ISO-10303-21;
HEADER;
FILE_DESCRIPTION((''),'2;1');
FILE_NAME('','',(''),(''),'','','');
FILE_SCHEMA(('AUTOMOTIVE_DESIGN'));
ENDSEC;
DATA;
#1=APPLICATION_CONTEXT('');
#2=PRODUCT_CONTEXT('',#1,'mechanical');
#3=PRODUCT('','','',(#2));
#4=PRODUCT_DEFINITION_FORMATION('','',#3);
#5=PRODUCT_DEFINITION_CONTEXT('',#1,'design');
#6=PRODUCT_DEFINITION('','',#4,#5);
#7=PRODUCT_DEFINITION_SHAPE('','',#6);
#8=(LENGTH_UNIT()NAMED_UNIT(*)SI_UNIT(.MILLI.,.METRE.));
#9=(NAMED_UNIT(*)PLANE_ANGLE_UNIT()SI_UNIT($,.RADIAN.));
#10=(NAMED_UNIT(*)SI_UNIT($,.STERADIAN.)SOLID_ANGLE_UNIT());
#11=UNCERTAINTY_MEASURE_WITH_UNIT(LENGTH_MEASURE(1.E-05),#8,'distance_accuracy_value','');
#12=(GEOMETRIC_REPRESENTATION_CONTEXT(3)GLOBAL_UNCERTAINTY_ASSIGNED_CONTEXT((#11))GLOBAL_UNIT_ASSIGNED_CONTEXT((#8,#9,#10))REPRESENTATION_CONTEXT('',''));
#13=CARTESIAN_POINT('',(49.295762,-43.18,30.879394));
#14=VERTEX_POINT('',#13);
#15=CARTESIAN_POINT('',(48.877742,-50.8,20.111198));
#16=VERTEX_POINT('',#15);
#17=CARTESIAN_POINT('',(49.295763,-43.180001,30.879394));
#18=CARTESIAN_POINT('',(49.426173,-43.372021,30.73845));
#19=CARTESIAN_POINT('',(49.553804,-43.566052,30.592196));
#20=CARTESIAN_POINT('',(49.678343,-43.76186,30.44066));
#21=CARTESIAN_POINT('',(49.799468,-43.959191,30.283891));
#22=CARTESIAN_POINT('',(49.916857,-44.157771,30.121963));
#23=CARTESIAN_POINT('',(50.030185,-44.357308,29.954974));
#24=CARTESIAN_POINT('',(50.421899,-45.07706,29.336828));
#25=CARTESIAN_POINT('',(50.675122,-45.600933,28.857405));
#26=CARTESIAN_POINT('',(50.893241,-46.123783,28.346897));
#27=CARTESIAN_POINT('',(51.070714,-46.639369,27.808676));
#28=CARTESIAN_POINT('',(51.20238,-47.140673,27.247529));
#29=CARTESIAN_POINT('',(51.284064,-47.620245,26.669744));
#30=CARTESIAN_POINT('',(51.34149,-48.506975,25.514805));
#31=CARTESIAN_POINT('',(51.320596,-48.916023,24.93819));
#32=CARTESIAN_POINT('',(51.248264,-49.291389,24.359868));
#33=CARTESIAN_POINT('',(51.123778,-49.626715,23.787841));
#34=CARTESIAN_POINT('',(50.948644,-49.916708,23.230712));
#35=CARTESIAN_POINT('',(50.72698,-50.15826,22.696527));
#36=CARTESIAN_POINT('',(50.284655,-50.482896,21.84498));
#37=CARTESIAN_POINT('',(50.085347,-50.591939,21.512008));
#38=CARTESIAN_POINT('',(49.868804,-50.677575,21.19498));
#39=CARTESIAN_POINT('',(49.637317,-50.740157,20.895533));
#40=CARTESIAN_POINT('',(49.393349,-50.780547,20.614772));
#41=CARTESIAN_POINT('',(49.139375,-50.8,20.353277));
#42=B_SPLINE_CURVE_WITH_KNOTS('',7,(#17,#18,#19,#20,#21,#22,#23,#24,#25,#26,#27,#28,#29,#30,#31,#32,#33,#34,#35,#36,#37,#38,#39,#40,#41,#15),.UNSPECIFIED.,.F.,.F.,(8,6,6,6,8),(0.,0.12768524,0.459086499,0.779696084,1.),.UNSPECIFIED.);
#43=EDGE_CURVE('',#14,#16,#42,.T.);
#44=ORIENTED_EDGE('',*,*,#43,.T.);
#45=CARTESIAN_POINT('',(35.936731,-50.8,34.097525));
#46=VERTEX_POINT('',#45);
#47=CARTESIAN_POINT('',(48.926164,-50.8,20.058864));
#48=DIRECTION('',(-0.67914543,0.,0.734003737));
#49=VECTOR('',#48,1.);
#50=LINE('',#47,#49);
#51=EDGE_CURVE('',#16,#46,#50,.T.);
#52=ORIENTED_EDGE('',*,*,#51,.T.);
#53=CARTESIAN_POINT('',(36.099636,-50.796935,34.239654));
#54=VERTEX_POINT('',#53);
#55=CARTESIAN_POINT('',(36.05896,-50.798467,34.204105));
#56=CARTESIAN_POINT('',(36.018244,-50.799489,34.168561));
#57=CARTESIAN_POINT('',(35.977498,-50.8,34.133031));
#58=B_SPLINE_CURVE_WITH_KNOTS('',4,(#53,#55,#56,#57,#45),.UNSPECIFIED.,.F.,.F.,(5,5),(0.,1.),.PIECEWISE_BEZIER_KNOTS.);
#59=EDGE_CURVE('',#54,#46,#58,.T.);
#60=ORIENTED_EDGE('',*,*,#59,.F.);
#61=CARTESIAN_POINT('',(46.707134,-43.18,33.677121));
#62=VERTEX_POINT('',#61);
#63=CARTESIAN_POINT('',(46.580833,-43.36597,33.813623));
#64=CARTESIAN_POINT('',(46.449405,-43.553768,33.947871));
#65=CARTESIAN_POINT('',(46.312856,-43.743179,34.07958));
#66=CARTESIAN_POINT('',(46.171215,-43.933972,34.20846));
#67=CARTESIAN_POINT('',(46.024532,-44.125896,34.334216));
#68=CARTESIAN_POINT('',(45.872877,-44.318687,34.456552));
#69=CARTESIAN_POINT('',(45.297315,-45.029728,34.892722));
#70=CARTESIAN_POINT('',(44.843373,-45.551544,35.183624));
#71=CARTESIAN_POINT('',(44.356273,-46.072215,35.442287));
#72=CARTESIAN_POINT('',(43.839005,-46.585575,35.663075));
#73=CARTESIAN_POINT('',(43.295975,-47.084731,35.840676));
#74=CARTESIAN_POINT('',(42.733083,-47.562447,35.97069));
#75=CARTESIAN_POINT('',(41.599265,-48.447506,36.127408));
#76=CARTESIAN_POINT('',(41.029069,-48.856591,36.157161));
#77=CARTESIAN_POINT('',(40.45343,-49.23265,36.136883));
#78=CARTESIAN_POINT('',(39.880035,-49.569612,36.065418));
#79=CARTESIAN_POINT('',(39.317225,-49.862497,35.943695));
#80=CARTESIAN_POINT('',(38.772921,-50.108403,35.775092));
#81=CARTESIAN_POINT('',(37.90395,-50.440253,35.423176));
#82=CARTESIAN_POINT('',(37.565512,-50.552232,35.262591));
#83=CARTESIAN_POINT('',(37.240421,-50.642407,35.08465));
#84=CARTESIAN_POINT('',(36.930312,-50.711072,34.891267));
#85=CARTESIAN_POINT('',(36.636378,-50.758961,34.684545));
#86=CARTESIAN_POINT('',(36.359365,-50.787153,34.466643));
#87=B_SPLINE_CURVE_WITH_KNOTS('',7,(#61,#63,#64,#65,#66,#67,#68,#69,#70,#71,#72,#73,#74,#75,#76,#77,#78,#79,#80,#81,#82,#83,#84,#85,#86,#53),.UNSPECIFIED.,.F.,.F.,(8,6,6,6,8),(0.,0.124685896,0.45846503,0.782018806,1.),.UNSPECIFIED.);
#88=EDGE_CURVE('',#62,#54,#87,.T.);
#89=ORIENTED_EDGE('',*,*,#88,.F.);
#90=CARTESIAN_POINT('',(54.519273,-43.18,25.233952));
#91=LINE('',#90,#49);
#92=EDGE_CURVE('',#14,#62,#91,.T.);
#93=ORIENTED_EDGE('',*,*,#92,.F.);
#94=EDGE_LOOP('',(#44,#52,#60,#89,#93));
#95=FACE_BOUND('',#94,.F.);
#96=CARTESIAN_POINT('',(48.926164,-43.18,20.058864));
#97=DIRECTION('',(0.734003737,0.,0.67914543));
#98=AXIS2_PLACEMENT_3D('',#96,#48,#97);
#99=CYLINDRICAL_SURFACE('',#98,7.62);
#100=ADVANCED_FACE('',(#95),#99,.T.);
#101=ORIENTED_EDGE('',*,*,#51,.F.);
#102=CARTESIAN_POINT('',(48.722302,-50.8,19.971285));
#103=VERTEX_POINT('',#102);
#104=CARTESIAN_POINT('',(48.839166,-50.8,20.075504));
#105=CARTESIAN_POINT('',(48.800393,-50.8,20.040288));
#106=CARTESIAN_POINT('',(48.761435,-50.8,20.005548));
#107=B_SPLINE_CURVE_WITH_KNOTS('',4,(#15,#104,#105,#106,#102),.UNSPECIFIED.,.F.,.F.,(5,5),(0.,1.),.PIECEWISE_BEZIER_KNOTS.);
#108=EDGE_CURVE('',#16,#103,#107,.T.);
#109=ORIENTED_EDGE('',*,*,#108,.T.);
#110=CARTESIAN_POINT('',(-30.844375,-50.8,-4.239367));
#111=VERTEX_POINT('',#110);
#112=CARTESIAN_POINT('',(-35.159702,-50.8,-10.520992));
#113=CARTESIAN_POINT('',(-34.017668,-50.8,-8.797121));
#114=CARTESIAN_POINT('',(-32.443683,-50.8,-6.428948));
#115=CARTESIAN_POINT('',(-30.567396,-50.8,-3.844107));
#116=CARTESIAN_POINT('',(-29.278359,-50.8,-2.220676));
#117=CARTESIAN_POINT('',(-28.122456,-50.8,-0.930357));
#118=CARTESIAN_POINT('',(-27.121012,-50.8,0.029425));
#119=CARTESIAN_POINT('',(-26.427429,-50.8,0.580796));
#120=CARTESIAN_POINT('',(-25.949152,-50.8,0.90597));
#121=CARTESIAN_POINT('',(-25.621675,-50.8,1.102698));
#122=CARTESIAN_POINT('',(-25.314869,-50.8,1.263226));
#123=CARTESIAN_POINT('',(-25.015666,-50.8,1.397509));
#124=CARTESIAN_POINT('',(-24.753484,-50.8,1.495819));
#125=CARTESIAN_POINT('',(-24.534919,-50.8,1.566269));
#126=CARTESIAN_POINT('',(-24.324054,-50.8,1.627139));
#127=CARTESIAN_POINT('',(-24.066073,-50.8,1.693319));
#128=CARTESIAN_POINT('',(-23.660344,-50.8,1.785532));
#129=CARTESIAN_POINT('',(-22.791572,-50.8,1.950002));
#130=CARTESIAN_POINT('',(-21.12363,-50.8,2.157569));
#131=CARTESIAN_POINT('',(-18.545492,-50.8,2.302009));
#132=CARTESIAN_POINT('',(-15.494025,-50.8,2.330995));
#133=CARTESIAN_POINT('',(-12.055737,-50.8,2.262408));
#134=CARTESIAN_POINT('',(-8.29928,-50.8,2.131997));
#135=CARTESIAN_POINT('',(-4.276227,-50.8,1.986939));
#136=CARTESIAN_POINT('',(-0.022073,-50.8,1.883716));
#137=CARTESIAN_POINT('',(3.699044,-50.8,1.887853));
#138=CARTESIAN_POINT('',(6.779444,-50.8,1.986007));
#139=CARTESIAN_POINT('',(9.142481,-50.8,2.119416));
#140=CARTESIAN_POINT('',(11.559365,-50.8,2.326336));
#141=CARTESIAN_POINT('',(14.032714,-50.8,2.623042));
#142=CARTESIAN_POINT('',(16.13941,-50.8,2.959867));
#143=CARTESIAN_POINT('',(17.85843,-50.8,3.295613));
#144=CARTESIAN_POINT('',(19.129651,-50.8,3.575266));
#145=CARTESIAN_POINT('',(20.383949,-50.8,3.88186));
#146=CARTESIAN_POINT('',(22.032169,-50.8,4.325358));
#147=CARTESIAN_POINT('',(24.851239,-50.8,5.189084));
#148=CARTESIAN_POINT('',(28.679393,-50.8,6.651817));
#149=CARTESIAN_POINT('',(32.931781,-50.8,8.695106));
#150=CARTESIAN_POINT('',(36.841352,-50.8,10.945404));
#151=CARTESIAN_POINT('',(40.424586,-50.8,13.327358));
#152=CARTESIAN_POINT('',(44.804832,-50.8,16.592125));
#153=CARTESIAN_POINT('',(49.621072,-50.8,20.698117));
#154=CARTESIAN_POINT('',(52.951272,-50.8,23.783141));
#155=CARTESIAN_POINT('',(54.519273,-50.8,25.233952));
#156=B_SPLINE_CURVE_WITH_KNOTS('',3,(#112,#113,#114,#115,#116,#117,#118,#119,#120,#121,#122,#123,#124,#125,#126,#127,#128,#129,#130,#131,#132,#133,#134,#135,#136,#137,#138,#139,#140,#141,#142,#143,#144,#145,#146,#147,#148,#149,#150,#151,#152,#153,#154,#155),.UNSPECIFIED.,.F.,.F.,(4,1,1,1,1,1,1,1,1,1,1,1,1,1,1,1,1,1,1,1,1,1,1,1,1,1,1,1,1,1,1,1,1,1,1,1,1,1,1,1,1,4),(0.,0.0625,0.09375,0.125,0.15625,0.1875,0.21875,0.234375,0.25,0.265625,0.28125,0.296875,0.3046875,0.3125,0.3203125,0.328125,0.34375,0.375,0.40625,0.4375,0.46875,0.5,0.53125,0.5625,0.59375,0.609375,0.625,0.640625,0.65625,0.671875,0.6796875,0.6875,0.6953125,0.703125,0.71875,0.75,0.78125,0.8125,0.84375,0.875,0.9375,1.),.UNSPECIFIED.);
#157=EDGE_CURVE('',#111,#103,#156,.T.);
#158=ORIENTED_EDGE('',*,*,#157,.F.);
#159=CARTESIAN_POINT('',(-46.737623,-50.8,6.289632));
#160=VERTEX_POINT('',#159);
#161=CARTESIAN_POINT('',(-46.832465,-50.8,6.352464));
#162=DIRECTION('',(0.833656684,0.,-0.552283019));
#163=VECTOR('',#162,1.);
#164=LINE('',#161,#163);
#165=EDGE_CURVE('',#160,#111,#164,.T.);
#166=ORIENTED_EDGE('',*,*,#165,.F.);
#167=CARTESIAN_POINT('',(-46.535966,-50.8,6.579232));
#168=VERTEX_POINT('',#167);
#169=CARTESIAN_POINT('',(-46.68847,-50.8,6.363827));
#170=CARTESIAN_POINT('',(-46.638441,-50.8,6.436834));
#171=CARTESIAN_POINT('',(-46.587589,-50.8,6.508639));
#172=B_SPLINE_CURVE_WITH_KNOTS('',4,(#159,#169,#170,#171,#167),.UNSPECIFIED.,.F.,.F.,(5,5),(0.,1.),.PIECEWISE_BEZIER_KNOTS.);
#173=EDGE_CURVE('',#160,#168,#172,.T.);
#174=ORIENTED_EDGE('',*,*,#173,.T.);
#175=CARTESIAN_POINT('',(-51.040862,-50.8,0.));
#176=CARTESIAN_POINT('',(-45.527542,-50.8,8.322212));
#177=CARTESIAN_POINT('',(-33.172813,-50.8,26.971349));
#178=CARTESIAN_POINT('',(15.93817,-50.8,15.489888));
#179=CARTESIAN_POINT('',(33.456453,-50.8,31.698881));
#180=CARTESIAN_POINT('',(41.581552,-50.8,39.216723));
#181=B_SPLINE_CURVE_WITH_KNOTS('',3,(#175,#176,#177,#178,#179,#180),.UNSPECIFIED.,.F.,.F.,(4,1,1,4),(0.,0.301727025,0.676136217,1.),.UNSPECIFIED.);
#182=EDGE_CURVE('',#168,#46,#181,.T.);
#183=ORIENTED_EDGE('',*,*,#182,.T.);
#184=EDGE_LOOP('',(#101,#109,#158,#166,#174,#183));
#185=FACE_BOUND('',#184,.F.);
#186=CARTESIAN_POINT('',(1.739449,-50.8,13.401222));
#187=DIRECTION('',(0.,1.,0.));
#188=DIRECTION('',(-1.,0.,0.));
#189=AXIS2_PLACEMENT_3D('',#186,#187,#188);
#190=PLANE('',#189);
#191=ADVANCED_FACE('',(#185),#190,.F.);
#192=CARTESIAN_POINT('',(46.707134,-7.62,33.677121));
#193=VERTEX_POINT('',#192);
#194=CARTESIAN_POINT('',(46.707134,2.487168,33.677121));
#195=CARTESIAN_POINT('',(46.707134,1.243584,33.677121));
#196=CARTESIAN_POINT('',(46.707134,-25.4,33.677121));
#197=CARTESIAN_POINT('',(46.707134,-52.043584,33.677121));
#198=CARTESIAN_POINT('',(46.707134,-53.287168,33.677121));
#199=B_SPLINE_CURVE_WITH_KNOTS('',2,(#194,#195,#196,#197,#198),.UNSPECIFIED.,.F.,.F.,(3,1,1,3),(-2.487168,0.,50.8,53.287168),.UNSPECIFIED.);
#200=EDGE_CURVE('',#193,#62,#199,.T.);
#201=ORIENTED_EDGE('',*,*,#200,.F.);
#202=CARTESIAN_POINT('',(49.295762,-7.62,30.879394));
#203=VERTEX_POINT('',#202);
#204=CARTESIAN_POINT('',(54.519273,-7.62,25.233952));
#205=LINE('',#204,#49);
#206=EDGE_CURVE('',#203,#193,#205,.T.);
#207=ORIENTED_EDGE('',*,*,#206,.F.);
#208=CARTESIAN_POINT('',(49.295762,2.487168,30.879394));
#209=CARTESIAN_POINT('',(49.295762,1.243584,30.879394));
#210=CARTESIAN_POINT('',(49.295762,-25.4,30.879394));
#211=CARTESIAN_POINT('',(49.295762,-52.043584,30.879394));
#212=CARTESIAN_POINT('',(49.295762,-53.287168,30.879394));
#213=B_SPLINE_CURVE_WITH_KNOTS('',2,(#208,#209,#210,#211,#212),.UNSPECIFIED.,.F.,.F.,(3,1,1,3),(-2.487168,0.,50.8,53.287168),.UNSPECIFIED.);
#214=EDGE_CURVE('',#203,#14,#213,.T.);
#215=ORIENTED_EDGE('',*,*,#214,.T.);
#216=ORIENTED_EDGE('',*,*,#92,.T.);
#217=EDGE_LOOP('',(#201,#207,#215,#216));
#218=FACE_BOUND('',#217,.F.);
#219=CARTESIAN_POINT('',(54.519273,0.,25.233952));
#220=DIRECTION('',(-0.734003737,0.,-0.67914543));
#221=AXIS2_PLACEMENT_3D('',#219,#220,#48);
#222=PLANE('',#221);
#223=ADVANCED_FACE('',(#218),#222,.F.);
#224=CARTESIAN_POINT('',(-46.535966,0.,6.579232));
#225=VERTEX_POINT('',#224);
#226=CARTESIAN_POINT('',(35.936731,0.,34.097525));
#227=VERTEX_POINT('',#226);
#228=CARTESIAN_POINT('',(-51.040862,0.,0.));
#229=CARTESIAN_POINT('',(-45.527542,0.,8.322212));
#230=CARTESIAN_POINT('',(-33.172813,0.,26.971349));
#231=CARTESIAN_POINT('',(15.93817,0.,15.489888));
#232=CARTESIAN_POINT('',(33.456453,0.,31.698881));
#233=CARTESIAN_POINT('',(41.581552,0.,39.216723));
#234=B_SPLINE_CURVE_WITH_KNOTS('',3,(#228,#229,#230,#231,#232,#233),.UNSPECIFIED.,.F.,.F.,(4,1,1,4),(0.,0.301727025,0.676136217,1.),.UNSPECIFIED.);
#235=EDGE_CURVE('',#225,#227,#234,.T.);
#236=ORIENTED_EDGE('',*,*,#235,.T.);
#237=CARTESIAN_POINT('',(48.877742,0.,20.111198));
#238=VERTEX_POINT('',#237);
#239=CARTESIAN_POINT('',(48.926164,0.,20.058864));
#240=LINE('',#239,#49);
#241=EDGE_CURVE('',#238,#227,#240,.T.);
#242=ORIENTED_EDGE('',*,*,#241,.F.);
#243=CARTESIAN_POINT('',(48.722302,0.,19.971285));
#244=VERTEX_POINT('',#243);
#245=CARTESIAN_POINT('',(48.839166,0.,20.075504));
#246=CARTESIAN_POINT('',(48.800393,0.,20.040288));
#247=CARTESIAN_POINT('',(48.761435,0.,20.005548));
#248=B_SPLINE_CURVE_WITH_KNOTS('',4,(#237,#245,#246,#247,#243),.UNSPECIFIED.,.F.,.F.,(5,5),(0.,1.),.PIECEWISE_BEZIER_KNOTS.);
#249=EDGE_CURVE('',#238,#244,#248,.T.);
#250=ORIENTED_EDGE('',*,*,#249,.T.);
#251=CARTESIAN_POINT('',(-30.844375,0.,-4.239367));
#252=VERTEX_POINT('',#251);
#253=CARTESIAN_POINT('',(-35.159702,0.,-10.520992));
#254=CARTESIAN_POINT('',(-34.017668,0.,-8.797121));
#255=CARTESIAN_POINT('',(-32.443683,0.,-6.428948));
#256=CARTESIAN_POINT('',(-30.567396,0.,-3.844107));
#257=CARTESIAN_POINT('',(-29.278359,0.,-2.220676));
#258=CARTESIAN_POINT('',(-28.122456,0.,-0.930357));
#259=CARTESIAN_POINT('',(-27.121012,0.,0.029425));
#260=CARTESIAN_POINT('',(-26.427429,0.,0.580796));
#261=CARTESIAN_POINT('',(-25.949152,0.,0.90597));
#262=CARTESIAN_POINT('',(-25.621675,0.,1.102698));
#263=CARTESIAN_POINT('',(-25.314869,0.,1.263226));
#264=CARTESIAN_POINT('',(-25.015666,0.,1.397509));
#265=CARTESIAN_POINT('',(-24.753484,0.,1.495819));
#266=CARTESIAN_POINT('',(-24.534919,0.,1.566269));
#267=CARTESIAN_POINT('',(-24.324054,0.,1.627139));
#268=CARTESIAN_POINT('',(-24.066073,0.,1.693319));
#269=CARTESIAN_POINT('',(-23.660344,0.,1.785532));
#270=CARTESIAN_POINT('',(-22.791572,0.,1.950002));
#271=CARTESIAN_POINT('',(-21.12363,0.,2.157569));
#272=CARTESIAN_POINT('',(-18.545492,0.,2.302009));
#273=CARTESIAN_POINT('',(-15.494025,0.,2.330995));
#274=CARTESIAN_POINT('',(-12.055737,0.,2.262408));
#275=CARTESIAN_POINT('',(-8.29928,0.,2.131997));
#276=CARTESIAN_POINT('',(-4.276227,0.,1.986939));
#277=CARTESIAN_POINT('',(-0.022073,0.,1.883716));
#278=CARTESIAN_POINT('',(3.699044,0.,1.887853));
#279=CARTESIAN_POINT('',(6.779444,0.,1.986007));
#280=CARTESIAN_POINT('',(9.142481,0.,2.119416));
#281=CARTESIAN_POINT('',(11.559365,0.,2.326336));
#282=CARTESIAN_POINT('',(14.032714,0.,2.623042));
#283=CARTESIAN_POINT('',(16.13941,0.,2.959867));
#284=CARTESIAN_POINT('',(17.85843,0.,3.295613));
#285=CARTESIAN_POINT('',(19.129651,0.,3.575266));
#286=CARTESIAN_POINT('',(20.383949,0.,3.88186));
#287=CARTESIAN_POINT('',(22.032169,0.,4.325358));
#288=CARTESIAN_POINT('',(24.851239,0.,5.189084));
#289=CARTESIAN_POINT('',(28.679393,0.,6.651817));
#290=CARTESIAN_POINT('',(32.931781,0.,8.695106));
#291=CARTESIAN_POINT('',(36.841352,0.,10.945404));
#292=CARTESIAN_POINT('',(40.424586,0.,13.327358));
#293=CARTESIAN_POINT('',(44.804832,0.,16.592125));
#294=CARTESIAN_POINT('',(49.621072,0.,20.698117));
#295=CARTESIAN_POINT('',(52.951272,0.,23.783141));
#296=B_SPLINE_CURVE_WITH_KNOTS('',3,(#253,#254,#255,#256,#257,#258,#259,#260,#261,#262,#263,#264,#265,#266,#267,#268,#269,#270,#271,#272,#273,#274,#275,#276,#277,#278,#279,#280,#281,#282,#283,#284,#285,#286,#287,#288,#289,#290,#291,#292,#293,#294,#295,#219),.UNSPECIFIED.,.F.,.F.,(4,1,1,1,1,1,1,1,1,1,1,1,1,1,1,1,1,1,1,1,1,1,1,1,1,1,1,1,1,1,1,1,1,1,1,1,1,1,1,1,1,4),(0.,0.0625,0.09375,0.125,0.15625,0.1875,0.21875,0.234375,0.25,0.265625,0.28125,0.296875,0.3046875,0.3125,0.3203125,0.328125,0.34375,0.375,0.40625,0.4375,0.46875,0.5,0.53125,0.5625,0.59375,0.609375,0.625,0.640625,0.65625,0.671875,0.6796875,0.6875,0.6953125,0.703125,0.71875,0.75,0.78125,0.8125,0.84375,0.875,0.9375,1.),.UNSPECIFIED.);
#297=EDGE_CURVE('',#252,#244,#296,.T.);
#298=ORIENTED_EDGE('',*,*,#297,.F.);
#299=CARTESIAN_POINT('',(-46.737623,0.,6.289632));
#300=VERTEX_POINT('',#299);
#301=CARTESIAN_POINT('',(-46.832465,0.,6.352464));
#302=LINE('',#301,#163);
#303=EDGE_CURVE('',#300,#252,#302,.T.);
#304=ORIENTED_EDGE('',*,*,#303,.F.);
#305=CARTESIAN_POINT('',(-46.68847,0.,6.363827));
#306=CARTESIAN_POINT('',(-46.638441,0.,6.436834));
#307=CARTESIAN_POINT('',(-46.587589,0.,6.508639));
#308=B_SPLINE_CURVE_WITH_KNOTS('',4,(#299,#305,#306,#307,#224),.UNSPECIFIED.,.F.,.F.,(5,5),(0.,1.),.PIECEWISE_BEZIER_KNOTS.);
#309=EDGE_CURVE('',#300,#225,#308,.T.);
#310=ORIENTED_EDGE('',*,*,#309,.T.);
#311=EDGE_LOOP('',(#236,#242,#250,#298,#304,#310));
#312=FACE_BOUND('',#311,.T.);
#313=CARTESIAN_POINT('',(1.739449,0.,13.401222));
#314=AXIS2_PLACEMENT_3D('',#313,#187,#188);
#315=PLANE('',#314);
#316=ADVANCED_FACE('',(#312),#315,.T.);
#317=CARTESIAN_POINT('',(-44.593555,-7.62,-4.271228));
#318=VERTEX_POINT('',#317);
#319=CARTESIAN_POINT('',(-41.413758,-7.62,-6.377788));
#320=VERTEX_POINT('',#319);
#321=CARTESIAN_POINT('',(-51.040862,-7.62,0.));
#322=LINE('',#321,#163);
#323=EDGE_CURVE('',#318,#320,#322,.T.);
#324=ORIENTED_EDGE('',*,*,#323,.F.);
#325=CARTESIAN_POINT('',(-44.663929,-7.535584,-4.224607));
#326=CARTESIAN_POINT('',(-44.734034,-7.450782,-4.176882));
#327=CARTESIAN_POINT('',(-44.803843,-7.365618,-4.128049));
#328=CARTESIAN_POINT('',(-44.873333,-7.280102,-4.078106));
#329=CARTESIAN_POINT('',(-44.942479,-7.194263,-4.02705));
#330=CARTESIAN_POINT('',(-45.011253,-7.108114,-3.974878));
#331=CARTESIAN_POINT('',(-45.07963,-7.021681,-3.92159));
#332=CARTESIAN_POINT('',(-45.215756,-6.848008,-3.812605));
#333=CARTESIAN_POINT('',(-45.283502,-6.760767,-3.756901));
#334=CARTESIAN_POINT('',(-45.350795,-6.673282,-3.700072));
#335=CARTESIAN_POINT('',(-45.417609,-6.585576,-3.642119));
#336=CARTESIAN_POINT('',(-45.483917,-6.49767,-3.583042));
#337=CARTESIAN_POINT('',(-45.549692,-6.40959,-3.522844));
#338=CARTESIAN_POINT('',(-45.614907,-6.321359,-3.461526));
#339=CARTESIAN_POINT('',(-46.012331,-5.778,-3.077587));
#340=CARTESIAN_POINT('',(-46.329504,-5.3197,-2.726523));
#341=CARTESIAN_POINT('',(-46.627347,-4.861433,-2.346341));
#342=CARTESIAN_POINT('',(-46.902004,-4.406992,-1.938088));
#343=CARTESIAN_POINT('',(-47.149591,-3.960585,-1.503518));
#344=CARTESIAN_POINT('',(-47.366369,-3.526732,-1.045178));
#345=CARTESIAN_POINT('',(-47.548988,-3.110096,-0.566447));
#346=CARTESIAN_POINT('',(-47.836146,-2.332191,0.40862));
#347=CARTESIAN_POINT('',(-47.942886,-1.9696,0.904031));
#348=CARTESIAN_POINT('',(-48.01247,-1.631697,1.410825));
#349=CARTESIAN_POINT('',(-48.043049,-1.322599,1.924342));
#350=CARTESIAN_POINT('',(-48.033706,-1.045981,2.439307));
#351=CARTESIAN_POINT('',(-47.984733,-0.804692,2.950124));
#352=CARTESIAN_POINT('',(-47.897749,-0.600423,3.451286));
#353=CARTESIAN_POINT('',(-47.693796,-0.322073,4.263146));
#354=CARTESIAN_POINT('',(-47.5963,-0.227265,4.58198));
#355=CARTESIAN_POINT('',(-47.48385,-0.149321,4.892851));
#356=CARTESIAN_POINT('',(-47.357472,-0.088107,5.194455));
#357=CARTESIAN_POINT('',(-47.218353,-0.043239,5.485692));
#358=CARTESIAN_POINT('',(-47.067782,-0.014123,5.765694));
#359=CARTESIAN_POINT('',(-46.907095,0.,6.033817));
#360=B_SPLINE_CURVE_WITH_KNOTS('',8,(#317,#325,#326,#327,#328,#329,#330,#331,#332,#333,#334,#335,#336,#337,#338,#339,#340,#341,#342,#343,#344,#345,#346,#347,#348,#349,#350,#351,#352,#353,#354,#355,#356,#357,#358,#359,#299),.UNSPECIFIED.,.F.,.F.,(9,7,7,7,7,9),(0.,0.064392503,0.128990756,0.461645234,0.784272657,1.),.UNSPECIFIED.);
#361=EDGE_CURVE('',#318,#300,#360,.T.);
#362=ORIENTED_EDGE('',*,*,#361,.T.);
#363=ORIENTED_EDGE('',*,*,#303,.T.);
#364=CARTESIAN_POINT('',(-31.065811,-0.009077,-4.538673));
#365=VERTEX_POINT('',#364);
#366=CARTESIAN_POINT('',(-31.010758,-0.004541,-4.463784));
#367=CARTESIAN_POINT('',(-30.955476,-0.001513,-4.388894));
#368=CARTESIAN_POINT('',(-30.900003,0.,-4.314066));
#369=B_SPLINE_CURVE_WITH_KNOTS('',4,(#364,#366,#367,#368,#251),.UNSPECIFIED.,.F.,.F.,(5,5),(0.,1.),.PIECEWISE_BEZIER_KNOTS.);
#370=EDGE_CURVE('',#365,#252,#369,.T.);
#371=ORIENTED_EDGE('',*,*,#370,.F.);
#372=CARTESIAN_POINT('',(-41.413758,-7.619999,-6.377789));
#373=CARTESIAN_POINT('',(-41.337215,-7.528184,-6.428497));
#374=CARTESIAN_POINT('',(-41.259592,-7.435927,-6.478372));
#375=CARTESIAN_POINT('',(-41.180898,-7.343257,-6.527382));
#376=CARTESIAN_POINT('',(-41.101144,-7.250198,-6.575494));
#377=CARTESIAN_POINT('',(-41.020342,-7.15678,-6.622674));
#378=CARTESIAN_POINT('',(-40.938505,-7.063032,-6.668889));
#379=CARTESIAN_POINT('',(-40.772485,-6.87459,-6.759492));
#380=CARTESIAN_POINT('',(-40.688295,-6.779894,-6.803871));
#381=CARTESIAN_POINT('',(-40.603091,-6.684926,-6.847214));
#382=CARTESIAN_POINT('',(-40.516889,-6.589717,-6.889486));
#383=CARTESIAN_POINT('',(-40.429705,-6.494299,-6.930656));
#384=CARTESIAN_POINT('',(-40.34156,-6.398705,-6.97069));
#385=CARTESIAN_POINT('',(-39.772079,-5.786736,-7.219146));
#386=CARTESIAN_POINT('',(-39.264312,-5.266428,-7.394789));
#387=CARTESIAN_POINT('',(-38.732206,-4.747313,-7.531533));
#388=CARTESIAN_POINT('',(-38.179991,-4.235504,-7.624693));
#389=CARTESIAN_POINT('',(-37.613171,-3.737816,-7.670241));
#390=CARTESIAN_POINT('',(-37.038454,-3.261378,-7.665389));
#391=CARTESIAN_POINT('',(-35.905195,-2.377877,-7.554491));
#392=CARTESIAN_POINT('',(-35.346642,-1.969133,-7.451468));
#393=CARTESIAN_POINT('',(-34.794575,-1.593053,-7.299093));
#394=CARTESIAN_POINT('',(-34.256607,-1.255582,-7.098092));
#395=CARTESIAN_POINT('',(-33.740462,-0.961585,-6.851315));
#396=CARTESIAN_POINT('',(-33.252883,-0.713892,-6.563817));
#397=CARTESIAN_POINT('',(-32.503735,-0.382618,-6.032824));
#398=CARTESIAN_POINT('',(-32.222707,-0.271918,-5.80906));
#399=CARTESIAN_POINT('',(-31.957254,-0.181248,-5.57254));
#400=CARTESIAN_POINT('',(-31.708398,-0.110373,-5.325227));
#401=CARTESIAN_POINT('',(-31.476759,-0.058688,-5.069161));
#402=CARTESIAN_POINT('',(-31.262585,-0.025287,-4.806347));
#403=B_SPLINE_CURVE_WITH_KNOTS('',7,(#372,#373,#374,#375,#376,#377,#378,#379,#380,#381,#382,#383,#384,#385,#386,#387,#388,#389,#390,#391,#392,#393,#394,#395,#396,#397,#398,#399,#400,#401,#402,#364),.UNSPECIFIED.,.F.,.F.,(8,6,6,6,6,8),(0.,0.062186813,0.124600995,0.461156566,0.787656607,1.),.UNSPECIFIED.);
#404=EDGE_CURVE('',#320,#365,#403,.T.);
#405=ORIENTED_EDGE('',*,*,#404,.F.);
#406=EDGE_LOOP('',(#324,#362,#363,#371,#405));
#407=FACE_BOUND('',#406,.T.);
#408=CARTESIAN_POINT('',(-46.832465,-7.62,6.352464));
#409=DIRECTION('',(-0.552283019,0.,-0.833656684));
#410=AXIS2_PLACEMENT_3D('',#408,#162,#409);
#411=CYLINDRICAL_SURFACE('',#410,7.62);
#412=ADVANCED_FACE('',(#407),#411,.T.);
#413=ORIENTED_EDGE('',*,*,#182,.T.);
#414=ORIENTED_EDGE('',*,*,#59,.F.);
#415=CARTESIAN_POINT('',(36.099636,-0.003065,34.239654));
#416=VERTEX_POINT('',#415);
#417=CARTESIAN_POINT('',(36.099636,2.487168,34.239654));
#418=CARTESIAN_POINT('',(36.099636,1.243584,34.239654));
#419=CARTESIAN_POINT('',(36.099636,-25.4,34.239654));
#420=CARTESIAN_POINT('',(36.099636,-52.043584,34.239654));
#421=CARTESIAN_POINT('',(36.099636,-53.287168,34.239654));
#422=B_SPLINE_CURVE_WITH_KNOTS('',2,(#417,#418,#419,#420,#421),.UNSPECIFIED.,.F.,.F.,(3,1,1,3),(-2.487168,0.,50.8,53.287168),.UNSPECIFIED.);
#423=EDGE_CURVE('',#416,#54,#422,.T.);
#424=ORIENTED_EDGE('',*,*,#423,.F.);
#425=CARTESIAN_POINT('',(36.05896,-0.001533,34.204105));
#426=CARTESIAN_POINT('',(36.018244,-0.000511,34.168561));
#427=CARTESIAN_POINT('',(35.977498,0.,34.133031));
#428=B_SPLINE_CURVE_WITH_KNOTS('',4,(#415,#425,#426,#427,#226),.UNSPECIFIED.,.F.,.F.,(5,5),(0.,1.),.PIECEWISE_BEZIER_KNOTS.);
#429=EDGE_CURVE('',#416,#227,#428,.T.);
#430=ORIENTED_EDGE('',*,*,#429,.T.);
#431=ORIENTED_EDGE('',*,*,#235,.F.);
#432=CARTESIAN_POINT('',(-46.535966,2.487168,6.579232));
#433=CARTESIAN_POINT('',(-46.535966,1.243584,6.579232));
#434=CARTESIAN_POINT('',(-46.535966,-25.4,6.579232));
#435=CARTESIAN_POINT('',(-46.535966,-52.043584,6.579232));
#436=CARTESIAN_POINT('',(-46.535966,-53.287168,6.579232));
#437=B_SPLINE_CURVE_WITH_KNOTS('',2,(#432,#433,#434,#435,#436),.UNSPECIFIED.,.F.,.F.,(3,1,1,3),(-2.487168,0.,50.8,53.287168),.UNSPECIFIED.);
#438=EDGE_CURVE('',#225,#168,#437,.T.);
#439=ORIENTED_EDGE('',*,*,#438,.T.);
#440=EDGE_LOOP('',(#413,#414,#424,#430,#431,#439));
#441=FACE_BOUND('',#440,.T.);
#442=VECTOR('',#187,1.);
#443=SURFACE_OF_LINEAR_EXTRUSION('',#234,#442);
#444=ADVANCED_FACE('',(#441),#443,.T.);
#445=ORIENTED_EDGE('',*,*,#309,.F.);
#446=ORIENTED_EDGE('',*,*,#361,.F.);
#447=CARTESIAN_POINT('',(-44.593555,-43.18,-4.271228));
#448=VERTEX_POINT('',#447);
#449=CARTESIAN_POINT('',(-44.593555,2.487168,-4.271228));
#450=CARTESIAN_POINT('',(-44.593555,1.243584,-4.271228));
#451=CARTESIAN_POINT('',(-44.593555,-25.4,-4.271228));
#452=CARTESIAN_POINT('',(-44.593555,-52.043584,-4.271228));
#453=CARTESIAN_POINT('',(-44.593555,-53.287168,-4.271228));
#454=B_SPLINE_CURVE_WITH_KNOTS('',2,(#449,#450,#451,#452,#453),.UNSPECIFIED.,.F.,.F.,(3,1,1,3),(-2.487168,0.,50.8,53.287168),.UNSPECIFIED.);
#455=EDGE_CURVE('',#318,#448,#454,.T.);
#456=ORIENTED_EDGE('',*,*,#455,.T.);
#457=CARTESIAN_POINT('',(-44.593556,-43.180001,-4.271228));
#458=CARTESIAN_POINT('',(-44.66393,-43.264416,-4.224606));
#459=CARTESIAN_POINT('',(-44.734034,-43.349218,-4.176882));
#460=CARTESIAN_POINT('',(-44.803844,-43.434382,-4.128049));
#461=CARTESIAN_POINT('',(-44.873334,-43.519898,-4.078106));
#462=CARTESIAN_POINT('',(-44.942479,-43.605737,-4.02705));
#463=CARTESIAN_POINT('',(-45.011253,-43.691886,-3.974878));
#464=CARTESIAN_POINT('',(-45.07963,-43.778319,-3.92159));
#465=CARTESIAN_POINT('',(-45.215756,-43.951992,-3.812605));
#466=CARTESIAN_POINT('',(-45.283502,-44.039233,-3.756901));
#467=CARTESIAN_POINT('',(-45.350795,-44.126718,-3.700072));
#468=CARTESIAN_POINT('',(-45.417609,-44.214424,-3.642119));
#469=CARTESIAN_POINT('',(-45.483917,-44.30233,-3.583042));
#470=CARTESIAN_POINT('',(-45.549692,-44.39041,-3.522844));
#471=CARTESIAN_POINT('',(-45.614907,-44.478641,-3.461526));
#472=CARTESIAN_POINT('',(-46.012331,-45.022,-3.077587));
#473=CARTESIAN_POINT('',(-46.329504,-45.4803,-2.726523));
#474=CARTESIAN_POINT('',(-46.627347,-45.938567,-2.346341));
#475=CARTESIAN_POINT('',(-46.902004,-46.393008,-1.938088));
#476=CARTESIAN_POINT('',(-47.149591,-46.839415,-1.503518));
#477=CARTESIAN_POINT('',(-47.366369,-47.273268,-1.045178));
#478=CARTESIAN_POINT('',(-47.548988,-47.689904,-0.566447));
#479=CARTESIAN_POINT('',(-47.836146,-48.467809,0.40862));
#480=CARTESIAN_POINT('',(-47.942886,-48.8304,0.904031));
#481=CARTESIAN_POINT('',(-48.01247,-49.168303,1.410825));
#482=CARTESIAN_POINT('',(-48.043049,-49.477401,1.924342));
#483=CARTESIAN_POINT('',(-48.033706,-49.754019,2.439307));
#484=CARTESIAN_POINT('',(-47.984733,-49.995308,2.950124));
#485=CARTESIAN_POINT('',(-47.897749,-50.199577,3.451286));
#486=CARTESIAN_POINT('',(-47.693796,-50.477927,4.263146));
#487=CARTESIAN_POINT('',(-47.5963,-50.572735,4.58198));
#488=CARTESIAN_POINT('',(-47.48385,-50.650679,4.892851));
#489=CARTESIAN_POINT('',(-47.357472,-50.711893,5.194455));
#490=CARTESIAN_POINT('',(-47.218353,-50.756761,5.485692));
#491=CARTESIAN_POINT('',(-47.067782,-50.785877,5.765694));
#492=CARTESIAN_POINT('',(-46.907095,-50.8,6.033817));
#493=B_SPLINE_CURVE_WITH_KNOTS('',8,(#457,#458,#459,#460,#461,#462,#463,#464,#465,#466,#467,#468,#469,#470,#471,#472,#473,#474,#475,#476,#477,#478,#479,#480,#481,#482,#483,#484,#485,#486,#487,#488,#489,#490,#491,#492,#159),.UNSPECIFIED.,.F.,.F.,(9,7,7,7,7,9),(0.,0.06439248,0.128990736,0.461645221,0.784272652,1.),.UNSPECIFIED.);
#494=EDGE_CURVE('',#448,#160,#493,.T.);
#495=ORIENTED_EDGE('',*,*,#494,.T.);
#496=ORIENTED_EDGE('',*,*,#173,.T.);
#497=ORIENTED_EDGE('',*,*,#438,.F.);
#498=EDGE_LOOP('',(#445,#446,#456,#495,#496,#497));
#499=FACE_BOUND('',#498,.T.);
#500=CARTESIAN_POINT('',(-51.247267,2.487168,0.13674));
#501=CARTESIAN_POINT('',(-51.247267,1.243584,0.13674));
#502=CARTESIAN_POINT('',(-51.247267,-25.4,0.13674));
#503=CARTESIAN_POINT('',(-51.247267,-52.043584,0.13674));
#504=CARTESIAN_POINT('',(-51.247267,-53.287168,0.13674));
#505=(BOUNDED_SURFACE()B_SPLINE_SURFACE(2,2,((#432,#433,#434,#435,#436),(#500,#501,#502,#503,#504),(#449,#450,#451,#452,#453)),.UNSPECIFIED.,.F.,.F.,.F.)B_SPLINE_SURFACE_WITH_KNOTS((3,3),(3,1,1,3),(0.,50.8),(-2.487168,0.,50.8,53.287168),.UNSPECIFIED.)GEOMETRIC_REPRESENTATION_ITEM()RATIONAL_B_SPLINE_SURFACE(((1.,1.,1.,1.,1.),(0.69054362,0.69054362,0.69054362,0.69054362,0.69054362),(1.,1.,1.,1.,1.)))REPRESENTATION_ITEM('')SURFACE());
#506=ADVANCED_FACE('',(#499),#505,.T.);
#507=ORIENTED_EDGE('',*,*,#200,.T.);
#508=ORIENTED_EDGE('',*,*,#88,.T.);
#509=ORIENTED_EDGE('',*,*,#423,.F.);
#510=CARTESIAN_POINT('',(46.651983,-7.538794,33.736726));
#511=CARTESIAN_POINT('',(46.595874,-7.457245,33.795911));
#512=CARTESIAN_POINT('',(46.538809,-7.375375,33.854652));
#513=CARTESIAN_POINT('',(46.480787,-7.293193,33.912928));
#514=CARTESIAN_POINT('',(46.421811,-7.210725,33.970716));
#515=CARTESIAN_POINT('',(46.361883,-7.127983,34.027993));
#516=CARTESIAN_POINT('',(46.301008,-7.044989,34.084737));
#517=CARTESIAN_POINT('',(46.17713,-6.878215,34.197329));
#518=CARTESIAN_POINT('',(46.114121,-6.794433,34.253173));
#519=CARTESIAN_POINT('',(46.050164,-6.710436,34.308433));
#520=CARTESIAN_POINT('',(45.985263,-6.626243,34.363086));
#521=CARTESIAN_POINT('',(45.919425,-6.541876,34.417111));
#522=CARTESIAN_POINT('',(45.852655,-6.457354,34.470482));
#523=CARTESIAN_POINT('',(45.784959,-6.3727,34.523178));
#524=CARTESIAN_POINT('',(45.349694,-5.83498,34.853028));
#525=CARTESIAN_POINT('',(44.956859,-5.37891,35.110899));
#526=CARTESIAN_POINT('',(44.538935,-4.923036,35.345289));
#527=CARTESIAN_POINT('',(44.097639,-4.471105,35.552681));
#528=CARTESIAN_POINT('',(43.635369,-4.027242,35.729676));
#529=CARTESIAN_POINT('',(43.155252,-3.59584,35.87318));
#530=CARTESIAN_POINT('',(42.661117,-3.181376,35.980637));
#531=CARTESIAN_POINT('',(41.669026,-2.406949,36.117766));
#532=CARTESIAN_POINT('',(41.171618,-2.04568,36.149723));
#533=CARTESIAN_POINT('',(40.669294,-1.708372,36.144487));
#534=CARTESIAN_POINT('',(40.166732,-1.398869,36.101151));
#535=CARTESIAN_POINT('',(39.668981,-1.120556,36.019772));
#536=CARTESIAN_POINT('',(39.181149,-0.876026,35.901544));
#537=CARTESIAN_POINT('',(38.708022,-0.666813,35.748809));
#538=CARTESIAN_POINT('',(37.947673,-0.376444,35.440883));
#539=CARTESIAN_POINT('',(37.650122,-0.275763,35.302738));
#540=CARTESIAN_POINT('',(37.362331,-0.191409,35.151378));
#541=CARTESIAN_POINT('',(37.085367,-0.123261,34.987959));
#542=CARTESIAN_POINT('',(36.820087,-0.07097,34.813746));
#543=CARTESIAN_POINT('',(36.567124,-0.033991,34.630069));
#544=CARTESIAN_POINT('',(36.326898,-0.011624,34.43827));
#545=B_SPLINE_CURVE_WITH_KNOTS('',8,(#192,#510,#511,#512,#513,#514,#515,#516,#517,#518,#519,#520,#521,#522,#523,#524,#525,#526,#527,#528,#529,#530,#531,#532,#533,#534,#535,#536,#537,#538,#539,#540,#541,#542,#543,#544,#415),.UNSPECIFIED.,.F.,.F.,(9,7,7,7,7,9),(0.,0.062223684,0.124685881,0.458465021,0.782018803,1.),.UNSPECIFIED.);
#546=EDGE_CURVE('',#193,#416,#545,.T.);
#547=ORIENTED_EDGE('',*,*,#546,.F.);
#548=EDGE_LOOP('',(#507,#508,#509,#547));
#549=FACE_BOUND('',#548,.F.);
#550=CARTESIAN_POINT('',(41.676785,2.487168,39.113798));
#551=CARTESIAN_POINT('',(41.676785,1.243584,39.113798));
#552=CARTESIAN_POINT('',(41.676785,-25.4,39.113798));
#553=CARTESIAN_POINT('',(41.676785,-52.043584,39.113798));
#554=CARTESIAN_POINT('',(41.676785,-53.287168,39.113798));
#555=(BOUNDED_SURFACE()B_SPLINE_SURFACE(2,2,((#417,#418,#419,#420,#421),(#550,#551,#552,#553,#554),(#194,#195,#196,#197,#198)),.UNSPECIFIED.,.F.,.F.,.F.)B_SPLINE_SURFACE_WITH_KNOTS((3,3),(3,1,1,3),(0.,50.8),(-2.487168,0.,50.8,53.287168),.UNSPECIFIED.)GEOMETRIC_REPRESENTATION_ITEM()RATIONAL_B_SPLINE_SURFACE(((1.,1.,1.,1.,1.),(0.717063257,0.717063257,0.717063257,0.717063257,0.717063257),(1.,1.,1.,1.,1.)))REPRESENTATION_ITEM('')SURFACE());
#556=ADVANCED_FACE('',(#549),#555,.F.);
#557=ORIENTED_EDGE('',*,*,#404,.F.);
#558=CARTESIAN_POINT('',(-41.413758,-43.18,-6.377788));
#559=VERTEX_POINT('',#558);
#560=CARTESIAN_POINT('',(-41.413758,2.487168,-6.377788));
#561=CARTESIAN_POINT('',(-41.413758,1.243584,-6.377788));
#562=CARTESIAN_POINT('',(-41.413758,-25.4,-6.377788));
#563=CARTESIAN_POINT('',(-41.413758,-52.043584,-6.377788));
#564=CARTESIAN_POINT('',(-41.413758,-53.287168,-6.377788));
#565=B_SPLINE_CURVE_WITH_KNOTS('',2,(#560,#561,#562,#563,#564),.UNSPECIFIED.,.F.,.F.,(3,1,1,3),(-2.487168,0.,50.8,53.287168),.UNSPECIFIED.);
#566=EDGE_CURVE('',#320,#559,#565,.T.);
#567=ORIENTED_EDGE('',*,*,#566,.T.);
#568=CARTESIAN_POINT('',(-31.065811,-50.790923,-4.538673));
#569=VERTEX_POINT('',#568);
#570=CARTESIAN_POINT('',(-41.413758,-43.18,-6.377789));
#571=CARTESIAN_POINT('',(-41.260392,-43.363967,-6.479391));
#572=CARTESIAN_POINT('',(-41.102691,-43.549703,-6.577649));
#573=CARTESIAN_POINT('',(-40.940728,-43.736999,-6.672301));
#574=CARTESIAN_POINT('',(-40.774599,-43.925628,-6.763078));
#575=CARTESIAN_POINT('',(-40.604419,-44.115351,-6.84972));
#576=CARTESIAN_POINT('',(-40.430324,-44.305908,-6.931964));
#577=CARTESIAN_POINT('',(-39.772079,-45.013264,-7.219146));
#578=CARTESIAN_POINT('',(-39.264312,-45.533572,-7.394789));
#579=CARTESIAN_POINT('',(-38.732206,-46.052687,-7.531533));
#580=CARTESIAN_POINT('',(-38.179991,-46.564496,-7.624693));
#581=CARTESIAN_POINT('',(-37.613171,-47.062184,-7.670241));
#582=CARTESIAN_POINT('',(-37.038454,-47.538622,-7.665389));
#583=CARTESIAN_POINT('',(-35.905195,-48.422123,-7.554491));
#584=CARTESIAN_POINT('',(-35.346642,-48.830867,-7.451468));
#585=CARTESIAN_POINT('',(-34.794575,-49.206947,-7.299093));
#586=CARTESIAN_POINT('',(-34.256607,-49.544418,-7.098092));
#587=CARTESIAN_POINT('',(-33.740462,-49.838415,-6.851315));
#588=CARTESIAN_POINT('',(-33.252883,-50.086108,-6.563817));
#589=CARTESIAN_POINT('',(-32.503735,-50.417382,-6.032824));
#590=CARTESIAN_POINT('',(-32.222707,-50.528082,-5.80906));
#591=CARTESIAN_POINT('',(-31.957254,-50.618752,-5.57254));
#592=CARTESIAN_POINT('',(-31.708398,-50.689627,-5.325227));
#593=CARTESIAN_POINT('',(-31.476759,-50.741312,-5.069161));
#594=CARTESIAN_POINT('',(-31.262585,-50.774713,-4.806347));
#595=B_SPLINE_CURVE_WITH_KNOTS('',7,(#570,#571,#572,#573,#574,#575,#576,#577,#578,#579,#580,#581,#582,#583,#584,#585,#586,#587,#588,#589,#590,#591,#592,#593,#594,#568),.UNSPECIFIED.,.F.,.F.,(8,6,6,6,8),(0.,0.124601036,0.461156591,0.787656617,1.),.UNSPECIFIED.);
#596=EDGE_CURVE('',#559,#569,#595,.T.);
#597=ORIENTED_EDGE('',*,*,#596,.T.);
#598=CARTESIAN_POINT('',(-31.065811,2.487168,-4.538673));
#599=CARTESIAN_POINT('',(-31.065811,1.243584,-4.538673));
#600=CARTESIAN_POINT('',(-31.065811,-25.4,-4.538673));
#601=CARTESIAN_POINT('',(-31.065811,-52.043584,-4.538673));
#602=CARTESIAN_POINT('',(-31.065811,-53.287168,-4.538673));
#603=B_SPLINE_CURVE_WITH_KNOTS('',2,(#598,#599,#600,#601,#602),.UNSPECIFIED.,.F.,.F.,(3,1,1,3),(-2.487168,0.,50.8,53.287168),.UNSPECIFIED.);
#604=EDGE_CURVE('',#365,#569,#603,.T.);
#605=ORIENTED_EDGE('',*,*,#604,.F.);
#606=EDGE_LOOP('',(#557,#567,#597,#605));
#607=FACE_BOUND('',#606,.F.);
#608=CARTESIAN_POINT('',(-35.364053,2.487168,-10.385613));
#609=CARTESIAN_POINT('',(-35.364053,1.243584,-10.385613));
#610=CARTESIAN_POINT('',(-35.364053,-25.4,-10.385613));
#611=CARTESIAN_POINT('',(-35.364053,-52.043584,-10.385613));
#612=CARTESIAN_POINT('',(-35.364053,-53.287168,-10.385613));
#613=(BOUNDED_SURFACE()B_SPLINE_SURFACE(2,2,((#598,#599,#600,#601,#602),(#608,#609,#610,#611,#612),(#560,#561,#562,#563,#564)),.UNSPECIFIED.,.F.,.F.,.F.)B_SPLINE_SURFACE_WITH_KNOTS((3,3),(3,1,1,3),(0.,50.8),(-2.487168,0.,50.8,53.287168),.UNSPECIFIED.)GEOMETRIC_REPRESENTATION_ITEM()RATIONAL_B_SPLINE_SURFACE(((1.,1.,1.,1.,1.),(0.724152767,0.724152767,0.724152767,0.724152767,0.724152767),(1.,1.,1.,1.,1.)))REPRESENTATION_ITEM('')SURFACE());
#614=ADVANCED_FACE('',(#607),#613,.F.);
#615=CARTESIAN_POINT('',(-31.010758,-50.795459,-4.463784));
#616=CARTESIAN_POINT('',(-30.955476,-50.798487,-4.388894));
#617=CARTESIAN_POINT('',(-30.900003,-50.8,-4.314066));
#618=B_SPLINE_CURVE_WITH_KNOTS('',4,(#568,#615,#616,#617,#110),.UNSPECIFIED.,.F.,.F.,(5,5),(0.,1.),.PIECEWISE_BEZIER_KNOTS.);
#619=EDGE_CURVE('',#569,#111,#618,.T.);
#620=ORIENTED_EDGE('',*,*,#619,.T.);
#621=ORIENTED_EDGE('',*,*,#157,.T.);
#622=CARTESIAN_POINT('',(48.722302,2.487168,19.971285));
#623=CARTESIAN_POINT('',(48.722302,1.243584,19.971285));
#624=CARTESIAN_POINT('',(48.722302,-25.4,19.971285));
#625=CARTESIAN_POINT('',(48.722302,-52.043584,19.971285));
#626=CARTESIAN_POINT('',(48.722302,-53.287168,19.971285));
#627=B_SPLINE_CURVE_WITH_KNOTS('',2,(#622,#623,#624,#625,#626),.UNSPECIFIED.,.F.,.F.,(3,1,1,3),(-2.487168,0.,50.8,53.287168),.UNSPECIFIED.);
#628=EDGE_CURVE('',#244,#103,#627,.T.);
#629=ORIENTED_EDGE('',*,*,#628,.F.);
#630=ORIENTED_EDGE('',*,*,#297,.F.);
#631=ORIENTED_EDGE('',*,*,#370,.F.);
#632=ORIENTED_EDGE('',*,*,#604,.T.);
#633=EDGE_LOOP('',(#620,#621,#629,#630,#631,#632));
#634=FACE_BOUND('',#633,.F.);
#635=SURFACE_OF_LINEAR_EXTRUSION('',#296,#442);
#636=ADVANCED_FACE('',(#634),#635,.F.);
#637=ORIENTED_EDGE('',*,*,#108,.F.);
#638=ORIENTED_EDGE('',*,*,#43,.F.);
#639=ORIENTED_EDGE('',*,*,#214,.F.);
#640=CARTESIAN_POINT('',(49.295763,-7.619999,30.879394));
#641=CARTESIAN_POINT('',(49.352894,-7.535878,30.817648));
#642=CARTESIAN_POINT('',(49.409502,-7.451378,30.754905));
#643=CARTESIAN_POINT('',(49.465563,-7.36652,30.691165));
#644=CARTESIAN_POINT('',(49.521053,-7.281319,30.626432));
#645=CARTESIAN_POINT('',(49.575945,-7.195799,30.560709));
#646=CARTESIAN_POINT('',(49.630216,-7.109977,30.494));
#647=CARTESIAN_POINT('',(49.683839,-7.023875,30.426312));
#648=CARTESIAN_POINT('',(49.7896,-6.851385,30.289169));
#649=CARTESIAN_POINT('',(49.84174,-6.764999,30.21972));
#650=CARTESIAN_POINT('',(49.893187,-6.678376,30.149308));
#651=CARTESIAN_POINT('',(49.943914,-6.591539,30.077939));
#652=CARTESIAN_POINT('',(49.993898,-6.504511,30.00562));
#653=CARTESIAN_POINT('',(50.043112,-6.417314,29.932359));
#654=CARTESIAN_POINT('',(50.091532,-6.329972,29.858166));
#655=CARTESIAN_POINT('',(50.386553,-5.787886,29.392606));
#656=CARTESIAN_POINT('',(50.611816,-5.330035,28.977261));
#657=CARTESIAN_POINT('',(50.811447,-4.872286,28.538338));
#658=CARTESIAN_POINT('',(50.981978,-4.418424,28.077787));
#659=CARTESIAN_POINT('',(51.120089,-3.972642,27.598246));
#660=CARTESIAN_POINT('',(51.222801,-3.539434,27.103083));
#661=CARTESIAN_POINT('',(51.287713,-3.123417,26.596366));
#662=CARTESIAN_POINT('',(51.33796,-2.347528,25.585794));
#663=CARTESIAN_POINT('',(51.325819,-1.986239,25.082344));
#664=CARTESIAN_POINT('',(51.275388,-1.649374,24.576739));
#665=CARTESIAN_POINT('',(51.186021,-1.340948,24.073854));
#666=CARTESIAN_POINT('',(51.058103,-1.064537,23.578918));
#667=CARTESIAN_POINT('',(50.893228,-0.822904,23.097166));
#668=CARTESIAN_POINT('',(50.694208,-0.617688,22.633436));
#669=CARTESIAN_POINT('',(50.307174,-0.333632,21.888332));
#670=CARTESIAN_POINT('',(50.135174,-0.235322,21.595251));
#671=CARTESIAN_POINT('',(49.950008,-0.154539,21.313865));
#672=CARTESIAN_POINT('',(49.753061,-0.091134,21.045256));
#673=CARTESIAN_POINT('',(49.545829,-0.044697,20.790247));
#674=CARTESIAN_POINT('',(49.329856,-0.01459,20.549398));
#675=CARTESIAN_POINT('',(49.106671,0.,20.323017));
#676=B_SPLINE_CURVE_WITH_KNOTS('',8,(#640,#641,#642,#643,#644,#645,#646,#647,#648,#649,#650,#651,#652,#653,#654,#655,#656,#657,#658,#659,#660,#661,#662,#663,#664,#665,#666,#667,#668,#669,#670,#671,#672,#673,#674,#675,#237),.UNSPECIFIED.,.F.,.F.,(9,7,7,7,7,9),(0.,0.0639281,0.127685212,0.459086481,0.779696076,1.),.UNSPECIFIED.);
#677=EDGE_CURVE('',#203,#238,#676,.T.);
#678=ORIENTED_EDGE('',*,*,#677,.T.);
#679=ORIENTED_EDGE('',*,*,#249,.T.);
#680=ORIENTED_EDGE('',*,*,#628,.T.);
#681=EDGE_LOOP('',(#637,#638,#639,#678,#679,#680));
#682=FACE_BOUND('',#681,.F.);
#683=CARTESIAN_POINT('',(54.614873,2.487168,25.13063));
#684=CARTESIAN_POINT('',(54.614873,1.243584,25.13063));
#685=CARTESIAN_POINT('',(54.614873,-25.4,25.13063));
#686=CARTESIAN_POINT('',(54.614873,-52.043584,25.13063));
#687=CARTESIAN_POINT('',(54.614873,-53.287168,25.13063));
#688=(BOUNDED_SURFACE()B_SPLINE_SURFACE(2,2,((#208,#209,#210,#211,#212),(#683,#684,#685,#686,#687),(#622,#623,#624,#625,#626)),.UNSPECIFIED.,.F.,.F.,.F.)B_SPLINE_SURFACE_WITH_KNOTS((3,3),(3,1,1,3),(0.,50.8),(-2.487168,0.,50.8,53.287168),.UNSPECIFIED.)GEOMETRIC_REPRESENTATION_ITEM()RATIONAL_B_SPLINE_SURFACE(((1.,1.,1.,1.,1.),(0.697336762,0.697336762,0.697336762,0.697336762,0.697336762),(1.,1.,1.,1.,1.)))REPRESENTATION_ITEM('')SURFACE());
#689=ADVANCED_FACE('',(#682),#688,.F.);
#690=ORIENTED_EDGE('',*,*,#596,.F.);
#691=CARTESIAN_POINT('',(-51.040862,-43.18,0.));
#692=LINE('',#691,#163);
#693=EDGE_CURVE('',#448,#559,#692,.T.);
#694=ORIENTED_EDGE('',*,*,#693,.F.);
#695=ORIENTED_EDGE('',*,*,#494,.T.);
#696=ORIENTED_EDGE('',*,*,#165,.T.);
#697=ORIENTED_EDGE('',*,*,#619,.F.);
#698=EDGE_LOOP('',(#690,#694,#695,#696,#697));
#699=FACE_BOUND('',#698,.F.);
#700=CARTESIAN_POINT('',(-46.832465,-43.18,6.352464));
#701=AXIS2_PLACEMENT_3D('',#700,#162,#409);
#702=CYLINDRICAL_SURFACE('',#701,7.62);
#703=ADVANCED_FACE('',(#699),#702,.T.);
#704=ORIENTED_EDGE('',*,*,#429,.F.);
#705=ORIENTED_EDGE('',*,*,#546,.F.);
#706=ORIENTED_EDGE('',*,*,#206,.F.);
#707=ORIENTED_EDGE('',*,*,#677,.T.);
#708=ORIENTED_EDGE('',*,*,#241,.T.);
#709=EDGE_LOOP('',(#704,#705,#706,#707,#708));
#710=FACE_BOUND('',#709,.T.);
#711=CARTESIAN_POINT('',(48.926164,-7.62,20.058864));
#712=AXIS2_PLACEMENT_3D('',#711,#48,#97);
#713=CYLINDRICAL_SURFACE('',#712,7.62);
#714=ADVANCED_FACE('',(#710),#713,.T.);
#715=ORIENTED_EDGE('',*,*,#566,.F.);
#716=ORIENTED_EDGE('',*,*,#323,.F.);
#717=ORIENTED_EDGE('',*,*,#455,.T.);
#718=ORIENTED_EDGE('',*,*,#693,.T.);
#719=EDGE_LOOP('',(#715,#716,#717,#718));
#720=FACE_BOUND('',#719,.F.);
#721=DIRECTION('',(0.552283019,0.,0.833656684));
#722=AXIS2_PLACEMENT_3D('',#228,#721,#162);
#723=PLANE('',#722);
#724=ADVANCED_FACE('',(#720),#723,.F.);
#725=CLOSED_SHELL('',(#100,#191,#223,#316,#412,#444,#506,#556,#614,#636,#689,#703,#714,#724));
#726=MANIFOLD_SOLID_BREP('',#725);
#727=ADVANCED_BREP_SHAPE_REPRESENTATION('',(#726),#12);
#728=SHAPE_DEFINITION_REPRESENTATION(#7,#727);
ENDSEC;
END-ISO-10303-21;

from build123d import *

# Parameters (mm, degrees)
F1_DEPTH = 50.8
F2_R     = 7.62


# Not quite as in the source:
# - the dataset's text gives a spline's control points without its knots; the knots are read off the source's solid


with BuildPart() as f1:
    # F0 (on Front) → F1 (new body)
    with BuildSketch(Plane.XZ):
        with BuildLine():
            add(Edge.make_bspline(
                [(-51.0408617556, 0), (-45.5275415756, 8.3222117367), (-33.1728131458, 26.9713492051), (15.9381703449, 15.4898879926), (33.4564530938, 31.6988813075), (41.5815524757, 39.2167232931)],
                knots=[0, 0, 0, 0, 0.3017270247, 0.6761362172, 1, 1, 1, 1], degree=3))
            Line((-51.0408617556, 0), (-35.1597019204, -10.5209915069))
            add(Edge.make_bspline(
                [(-35.1597019204, -10.5209915069), (-34.0176679526, -8.7971212834), (-32.4436828955, -6.4289476549), (-30.5673961608, -3.844107074), (-29.2783594821, -2.2206757706), (-28.1224556356, -0.9303565603), (-27.1210118733, 0.0294254181), (-26.427429255, 0.5807963747), (-25.9491520867, 0.9059703006), (-25.6216745244, 1.1026978633), (-25.3148685346, 1.2632261503), (-25.0156656107, 1.3975091183), (-24.7534837721, 1.4958188175), (-24.53491931, 1.5662690462), (-24.3240544361, 1.6271387901), (-24.0660733701, 1.6933193952), (-23.6603436757, 1.7855318353), (-22.791571975, 1.9500019347), (-21.1236299266, 2.157569393), (-18.5454924397, 2.3020094371), (-15.4940252899, 2.3309953909), (-12.0557374475, 2.2624077187), (-8.2992802909, 2.131996953), (-4.2762269139, 1.9869386104), (-0.0220731549, 1.8837160535), (3.6990437901, 1.8878531223), (6.7794439764, 1.9860069299), (9.1424813896, 2.1194163727), (11.5593646659, 2.326335526), (14.0327137076, 2.6230416895), (16.1394099163, 2.959867021), (17.8584301073, 3.295613243), (19.1296511182, 3.5752662629), (20.3839486951, 3.8818598634), (22.0321693162, 4.3253575728), (24.8512388207, 5.1890841749), (28.6793925567, 6.6518174582), (32.9317814942, 8.6951058623), (36.8413517827, 10.9454044623), (40.4245860953, 13.3273576493), (44.8048318302, 16.5921251267), (49.6210716705, 20.6981173805), (52.9512719821, 23.7831411529), (54.5192729081, 25.2339521081)],
                knots=[0, 0, 0, 0, 0.0625, 0.09375, 0.125, 0.15625, 0.1875, 0.21875, 0.234375, 0.25, 0.265625, 0.28125, 0.296875, 0.3046875, 0.3125, 0.3203125, 0.328125, 0.34375, 0.375, 0.40625, 0.4375, 0.46875, 0.5, 0.53125, 0.5625, 0.59375, 0.609375, 0.625, 0.640625, 0.65625, 0.671875, 0.6796875, 0.6875, 0.6953125, 0.703125, 0.71875, 0.75, 0.78125, 0.8125, 0.84375, 0.875, 0.9375, 1, 1, 1, 1], degree=3))
            Line((54.5192729081, 25.2339521081), (41.5815524757, 39.2167232931))
        make_face()
    extrude(amount=F1_DEPTH)

    # F2
    f2_edges = [f1.edges().sort_by_distance(p)[0] for p in [
        (41.581552, -25.4, 39.216723),
        (54.519273, -25.4, 25.233952),
        (48.050413, 0, 32.225338),
        (48.050413, -50.8, 32.225338),
        (-35.159702, -25.4, -10.520992),
        (-51.040862, -25.4, 0),
        (-43.100282, 0, -5.260496),
        (-43.100282, -50.8, -5.260496),
    ]]
    fillet(f2_edges, radius=F2_R)


solid = f1.part
